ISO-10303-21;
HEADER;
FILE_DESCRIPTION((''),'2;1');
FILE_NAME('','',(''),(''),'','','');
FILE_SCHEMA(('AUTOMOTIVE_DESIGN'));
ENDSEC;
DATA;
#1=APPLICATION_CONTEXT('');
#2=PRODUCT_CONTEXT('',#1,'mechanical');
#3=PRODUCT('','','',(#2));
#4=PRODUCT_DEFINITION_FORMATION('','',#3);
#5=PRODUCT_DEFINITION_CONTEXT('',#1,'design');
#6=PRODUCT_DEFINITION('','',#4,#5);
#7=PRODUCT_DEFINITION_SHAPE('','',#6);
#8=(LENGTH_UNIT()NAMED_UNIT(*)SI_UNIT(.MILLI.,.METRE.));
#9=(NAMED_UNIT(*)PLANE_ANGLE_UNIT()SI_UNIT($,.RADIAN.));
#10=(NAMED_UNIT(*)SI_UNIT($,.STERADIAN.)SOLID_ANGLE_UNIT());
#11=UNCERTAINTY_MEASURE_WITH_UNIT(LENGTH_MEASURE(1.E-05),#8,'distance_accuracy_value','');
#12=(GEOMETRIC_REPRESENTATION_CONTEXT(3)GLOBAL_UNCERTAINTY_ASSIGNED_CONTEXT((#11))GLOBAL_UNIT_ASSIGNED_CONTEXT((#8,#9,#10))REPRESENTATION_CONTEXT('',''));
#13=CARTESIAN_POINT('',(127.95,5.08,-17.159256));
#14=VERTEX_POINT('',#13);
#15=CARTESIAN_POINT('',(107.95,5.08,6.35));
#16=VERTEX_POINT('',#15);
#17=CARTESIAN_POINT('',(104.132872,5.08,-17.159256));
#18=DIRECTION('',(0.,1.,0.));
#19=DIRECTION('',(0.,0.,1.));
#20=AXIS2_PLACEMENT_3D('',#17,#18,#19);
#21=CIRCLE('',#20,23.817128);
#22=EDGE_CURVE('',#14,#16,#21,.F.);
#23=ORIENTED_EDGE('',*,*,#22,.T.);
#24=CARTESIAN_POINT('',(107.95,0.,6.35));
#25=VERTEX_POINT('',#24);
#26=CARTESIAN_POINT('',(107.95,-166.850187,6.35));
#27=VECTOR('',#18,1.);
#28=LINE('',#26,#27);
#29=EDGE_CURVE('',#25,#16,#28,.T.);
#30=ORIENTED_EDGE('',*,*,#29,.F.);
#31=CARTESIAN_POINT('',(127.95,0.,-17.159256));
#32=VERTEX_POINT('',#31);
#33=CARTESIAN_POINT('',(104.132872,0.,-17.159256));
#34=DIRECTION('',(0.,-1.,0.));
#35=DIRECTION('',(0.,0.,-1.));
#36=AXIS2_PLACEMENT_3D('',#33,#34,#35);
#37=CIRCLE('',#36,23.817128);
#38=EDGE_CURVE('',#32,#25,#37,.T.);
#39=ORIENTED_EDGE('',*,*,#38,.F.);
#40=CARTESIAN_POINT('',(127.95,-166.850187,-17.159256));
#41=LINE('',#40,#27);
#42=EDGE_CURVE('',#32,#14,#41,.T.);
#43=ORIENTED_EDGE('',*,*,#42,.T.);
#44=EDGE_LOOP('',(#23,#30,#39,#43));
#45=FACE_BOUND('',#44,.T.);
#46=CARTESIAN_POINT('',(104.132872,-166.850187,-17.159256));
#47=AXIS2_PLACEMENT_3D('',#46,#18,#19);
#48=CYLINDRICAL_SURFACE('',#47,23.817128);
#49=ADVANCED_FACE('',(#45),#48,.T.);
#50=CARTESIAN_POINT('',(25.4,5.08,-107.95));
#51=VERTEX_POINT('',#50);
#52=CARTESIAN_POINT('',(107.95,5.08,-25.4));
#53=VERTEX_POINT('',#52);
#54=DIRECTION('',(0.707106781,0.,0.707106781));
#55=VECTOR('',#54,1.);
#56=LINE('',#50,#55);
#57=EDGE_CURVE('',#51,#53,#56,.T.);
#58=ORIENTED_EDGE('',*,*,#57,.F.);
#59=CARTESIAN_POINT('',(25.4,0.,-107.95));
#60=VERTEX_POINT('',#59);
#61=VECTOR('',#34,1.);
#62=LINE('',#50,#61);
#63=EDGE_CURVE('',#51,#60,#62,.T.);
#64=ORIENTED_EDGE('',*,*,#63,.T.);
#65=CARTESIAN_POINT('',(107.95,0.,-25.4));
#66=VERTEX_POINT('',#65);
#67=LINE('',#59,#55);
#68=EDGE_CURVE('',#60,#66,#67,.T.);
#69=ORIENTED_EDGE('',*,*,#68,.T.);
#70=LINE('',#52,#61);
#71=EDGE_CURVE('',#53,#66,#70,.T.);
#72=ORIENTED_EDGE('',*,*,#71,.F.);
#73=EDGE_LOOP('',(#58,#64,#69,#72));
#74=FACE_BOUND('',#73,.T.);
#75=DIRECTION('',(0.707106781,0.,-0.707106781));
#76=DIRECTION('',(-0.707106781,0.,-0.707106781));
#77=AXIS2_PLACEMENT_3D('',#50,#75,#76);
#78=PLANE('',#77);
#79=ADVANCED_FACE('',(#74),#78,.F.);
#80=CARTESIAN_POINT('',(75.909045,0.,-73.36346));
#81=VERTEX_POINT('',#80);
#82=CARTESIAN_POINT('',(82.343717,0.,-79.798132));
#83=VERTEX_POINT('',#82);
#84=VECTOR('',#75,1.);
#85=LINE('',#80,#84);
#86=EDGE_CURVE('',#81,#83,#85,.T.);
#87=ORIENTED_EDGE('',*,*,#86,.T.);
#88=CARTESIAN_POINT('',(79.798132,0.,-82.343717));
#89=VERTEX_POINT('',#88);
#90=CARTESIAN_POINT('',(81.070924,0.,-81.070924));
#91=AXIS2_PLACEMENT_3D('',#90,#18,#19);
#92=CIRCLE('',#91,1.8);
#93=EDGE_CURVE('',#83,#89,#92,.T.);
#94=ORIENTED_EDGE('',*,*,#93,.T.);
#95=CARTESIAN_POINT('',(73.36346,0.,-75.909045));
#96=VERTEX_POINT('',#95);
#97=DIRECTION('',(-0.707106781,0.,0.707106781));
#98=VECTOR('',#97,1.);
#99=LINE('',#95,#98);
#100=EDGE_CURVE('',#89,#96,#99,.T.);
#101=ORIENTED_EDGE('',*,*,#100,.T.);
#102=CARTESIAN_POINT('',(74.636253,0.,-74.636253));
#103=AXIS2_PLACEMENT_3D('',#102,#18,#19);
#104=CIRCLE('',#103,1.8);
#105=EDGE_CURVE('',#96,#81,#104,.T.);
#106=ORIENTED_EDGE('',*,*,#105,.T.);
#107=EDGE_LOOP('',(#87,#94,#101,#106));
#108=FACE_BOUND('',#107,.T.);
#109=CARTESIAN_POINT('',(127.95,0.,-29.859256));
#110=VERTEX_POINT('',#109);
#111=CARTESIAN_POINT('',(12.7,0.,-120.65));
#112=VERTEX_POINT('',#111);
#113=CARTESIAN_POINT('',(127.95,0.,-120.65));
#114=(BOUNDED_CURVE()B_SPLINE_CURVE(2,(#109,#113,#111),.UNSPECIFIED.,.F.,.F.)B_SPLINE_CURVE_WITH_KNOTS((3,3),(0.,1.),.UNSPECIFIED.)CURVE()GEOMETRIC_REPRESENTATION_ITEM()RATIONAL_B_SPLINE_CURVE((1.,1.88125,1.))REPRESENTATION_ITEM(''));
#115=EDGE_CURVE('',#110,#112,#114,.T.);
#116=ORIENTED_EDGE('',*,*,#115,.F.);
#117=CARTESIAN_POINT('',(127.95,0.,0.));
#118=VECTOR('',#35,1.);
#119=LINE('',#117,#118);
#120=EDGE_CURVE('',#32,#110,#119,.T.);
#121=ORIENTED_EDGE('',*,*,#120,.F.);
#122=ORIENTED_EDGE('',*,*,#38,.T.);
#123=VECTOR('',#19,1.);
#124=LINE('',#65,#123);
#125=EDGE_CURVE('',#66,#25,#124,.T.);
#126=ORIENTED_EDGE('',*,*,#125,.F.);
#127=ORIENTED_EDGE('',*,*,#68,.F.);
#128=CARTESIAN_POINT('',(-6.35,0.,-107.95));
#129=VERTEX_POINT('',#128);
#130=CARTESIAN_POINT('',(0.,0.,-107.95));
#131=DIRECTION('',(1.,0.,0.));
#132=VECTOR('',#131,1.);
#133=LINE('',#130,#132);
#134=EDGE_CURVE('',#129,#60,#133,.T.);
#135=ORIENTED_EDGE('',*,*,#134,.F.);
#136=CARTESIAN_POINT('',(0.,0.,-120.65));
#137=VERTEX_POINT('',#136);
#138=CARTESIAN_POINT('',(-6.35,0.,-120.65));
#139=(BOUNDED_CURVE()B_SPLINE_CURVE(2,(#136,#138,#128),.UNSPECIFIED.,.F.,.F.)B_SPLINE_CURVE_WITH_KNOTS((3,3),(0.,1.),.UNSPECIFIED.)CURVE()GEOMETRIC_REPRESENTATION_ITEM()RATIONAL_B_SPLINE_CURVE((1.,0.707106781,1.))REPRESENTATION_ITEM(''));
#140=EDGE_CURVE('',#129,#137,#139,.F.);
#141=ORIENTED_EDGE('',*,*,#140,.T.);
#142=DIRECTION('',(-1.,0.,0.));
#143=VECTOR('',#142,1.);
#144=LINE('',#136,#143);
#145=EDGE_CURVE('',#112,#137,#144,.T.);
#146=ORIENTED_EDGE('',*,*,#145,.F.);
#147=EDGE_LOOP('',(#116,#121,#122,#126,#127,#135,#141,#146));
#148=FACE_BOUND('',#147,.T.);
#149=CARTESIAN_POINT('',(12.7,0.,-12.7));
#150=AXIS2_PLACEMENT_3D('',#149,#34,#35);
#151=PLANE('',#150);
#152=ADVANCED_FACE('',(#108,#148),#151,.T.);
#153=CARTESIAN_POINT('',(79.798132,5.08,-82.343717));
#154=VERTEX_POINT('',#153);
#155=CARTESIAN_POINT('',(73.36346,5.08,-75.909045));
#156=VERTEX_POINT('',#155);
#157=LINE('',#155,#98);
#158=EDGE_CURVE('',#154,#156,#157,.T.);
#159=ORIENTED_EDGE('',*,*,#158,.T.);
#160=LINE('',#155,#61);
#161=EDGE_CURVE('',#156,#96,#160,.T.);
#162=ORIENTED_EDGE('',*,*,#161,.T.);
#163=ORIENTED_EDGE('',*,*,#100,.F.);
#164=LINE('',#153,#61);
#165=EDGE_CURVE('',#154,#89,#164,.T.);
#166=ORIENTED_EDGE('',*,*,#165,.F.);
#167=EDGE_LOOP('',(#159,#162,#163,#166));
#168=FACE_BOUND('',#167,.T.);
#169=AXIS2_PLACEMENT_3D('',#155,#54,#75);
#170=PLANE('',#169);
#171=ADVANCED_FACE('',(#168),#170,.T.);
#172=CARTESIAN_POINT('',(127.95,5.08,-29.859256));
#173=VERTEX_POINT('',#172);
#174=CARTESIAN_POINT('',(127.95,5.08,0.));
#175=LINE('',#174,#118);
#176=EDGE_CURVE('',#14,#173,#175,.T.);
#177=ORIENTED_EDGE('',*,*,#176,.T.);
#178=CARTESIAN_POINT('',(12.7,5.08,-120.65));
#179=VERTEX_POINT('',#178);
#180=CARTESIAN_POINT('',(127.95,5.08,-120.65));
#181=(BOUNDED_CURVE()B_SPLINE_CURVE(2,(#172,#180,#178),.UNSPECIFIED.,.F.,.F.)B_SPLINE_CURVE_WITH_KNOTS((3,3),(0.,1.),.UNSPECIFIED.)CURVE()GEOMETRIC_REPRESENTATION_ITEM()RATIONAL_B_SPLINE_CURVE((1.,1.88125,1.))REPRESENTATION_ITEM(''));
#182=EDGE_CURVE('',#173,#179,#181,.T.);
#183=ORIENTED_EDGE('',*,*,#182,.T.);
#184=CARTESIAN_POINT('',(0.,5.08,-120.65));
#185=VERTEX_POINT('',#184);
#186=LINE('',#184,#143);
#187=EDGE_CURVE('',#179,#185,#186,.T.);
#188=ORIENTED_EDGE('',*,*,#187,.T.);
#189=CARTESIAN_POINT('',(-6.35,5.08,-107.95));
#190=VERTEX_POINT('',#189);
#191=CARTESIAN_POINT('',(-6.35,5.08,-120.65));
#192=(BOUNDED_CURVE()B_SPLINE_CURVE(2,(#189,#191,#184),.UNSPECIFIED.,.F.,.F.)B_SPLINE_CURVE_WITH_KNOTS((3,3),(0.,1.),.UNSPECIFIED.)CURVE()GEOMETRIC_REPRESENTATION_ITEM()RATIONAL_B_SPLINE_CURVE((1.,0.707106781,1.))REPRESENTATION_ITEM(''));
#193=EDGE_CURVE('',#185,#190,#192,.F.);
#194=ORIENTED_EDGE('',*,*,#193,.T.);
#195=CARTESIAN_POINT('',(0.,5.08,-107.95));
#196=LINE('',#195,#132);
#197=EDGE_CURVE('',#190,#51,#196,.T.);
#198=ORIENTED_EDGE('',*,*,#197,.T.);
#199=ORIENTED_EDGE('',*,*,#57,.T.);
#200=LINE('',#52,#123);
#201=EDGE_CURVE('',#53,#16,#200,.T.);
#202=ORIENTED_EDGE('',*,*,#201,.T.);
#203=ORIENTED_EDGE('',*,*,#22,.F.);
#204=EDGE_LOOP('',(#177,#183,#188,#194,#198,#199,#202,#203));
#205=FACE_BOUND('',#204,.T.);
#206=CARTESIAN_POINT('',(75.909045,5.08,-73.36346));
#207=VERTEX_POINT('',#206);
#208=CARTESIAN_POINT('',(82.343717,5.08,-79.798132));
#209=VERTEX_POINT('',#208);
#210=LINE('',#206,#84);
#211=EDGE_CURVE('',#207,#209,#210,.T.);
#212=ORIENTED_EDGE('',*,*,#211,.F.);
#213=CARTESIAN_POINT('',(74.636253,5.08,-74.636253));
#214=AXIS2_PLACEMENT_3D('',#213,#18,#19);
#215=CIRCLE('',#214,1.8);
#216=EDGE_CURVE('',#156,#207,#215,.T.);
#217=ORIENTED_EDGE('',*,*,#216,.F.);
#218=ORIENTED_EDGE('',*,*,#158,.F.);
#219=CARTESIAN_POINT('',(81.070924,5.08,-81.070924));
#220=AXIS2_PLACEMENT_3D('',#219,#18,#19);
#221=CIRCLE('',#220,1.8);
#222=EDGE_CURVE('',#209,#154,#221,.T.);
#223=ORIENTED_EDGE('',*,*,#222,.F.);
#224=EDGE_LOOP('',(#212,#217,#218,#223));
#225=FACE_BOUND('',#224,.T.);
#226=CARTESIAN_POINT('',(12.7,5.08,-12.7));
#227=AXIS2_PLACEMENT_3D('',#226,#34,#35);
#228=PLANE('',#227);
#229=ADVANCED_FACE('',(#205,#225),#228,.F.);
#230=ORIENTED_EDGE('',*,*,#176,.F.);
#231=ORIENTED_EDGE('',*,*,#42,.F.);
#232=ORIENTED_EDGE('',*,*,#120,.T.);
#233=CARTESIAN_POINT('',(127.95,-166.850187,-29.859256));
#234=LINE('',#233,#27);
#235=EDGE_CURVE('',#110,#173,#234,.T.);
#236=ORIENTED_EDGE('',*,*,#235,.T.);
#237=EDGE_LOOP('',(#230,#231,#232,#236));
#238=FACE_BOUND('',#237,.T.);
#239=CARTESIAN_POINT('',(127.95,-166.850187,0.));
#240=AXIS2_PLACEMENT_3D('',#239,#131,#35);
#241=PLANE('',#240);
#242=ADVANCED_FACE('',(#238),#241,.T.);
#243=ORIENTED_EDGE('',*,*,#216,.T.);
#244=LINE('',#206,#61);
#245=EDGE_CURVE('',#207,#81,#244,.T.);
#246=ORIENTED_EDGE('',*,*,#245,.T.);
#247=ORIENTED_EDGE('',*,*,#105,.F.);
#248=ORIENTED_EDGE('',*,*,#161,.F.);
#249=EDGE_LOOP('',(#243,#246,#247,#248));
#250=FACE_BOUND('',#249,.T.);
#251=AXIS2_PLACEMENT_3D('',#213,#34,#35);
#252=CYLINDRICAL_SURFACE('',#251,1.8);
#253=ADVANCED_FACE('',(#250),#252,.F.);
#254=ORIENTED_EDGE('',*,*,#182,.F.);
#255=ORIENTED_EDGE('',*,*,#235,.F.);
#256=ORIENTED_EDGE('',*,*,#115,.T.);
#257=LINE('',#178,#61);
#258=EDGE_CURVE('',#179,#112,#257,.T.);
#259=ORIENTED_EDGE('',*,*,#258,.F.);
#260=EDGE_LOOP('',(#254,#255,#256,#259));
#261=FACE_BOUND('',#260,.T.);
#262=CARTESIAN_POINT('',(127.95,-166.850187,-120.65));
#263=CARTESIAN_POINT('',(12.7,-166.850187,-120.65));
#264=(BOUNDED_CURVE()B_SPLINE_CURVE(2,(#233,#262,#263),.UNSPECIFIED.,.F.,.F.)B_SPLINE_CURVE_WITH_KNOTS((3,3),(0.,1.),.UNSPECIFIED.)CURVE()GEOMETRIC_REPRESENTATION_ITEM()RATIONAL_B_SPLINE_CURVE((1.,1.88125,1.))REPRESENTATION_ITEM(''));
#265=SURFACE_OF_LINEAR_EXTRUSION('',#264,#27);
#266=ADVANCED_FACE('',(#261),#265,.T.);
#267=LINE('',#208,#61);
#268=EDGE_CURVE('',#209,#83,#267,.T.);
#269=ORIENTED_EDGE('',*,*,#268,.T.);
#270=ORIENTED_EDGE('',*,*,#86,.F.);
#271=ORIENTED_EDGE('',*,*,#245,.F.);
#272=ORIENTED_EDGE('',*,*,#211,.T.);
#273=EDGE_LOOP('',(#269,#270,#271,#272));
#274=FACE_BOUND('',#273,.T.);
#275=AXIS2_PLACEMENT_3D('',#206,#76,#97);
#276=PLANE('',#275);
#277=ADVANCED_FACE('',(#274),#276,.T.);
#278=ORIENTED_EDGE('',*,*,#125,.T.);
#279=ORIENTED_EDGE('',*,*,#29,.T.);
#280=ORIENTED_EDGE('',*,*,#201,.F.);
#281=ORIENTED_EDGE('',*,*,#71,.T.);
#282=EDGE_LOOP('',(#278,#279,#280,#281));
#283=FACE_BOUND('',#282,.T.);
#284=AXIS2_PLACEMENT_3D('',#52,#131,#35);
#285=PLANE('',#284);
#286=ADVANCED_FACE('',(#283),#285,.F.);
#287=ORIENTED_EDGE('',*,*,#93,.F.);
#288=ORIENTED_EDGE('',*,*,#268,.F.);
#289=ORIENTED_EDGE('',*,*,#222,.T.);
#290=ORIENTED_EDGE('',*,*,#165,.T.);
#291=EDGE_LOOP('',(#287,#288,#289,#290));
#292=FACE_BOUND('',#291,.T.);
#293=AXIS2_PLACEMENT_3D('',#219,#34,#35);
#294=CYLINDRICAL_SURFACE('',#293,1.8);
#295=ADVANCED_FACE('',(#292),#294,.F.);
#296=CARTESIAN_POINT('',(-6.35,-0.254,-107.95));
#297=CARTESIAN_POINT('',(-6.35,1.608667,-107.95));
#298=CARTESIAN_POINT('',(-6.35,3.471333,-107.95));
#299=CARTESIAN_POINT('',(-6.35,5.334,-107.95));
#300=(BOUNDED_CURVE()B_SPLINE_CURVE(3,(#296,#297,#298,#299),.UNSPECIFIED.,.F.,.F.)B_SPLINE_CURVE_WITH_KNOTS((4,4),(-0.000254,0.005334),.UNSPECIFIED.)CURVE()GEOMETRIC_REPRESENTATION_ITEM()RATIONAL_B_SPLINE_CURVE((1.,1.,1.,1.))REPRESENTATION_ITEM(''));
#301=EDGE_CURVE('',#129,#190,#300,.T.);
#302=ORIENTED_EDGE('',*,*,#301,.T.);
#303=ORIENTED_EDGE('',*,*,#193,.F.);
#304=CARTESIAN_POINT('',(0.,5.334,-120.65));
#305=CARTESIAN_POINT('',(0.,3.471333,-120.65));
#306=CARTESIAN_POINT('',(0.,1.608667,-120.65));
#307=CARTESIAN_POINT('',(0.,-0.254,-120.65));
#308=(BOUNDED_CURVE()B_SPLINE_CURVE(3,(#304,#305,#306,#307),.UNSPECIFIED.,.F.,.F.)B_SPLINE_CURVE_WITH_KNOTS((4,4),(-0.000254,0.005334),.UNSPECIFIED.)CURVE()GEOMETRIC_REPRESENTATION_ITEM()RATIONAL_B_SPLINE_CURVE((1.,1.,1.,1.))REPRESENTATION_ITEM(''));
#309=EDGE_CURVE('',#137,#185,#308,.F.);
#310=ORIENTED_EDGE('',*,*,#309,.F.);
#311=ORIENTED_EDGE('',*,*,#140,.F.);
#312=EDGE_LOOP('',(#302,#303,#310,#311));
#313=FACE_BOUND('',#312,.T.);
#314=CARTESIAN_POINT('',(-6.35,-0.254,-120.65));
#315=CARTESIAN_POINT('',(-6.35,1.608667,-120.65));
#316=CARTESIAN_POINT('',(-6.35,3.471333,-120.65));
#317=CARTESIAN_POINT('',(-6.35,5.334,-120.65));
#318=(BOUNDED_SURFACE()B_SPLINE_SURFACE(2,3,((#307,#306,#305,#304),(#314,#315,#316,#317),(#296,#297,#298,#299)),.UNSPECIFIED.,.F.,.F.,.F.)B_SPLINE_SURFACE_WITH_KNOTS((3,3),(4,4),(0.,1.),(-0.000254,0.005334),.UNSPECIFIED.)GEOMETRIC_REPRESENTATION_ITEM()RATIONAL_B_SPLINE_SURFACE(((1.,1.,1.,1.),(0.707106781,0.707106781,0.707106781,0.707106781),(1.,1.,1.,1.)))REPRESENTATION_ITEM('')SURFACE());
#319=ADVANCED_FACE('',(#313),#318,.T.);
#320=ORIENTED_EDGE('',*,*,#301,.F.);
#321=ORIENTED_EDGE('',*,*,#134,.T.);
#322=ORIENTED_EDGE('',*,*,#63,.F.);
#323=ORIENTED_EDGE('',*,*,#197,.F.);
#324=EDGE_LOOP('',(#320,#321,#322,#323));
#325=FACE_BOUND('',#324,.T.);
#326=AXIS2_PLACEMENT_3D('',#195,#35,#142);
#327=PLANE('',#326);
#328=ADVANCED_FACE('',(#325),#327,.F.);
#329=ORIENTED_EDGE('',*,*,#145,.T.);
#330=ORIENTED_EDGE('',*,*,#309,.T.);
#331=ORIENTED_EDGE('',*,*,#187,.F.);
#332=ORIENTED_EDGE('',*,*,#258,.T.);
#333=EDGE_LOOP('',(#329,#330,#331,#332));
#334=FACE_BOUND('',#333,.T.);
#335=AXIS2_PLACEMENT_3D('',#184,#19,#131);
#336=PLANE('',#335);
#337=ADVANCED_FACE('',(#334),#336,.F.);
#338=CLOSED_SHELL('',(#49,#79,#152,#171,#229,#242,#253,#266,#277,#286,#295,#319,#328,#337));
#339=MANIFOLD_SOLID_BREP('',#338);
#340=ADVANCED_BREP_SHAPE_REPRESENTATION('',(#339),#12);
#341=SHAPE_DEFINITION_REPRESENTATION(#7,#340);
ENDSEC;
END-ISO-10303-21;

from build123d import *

# Parameters (mm, degrees)
BOSS_EXTRUDE1_DEPTH = 5.08
SKETCH2_W           = 12.7
SKETCH2_H           = 5.08
BOSS_EXTRUDE2_DEPTH = 6.35
FILLET3_SIZE        = 6.35
FILLET3_SIZE_2      = 12.7
BOSS_EXTRUDE3_START = -5.08
BOSS_EXTRUDE3_DEPTH = 5.08


with BuildPart() as part:
    # Sketch1 → Boss-Extrude1 (new body)
    with BuildSketch(Plane(origin=(0, 0, 0), x_dir=(1, 0, 0), z_dir=(0, 1, 0))):
        with BuildLine():
            Line((0, 120.65), (12.7, 120.65))
            ThreePointArc((12.7, 120.65), (89.032177029, 89.032177029), (120.65, 12.7))
            Line((120.65, 12.7), (120.65, 0))
            Line((120.65, 0), (107.95, 0))
            Line((107.95, 0), (107.95, 25.4))
            Line((107.95, 25.4), (25.4, 107.95))
            Line((25.4, 107.95), (0, 107.95))
            Line((0, 107.95), (0, 120.65))
        make_face()
        with BuildLine():
            Line((73.363460454, 75.909044866), (79.798132163, 82.343716575))
            ThreePointArc((79.798132163, 82.343716575), (82.343716575, 82.343716575), (82.343716575, 79.798132163))
            Line((82.343716575, 79.798132163), (75.909044866, 73.363460454))
            ThreePointArc((75.909044866, 73.363460454), (73.363460454, 73.363460454), (73.363460454, 75.909044866))
        make_face(mode=Mode.SUBTRACT)
    extrude(amount=BOSS_EXTRUDE1_DEPTH)

    # Sketch2 → Boss-Extrude2 (add)
    with BuildSketch(Plane.ZY):
        with Locations((-114.3, 2.54)):
            Rectangle(SKETCH2_W, SKETCH2_H)
    extrude(amount=BOSS_EXTRUDE2_DEPTH)

    # Fillet3
    # an asymmetric fillet: 12.7, 6.35 mm, written as the material it takes off along each edge
    with BuildSketch(Plane(origin=(-6.35, 36.83, -120.65), x_dir=(1, 0, 0), z_dir=(0, -1, 0))) as fillet3_piece_1:
        with BuildLine():
            Bezier((FILLET3_SIZE, 0), (0, 0), (0, FILLET3_SIZE_2), weights=[1, 0.707106781, 1])
            Line((0, FILLET3_SIZE_2), (0, 0))
            Line((0, 0), (FILLET3_SIZE, 0))
        make_face()
    extrude(amount=68.58, mode=Mode.SUBTRACT)

    # Sketch3 → Boss-Extrude3 (add)
    with BuildSketch(Plane(origin=(0, 5.08, 0), x_dir=(1, 0, 0), z_dir=(0, 1, 0)).offset(BOSS_EXTRUDE3_START)):
        with BuildLine():
            ThreePointArc((12.7, 120.65), (68.239816798, 105.266361331), (107.95, 63.5))
            Line((107.95, 63.5), (107.95, 104.894556371))
            add(Edge.make_bspline(
                [(107.95, 104.894556371), (87.95, 120.65), (12.7, 120.65)],
                knots=[0.5, 0.5, 0.5, 1, 1, 1], degree=2, weights=[1.440625, 1.440625, 1]))
        make_face()
        with BuildLine():
            Line((120.65, 12.7), (120.65, 0))
            ThreePointArc((120.65, 0), (126.049146067, 7.835495184), (127.95, 17.159256086))
            Line((127.95, 17.159256086), (127.95, 29.859256086))
            add(Edge.make_bspline(
                [(127.95, 29.859256086), (127.95, 89.139112741), (107.95, 104.894556371)],
                knots=[0, 0, 0, 0.5, 0.5, 0.5], degree=2, weights=[1, 1.440625, 1.440625]))
            Line((107.95, 104.894556371), (107.95, 63.5))
            ThreePointArc((107.95, 63.5), (117.426882891, 38.881720723), (120.65, 12.7))
        make_face()
        with BuildLine():
            Line((120.65, 0), (107.95, 0))
            Line((107.95, 0), (107.95, -6.35))
            ThreePointArc((107.95, -6.35), (114.784215424, -4.143430847), (120.65, 0))
        make_face()
    extrude(amount=BOSS_EXTRUDE3_DEPTH)


solid = part.part
